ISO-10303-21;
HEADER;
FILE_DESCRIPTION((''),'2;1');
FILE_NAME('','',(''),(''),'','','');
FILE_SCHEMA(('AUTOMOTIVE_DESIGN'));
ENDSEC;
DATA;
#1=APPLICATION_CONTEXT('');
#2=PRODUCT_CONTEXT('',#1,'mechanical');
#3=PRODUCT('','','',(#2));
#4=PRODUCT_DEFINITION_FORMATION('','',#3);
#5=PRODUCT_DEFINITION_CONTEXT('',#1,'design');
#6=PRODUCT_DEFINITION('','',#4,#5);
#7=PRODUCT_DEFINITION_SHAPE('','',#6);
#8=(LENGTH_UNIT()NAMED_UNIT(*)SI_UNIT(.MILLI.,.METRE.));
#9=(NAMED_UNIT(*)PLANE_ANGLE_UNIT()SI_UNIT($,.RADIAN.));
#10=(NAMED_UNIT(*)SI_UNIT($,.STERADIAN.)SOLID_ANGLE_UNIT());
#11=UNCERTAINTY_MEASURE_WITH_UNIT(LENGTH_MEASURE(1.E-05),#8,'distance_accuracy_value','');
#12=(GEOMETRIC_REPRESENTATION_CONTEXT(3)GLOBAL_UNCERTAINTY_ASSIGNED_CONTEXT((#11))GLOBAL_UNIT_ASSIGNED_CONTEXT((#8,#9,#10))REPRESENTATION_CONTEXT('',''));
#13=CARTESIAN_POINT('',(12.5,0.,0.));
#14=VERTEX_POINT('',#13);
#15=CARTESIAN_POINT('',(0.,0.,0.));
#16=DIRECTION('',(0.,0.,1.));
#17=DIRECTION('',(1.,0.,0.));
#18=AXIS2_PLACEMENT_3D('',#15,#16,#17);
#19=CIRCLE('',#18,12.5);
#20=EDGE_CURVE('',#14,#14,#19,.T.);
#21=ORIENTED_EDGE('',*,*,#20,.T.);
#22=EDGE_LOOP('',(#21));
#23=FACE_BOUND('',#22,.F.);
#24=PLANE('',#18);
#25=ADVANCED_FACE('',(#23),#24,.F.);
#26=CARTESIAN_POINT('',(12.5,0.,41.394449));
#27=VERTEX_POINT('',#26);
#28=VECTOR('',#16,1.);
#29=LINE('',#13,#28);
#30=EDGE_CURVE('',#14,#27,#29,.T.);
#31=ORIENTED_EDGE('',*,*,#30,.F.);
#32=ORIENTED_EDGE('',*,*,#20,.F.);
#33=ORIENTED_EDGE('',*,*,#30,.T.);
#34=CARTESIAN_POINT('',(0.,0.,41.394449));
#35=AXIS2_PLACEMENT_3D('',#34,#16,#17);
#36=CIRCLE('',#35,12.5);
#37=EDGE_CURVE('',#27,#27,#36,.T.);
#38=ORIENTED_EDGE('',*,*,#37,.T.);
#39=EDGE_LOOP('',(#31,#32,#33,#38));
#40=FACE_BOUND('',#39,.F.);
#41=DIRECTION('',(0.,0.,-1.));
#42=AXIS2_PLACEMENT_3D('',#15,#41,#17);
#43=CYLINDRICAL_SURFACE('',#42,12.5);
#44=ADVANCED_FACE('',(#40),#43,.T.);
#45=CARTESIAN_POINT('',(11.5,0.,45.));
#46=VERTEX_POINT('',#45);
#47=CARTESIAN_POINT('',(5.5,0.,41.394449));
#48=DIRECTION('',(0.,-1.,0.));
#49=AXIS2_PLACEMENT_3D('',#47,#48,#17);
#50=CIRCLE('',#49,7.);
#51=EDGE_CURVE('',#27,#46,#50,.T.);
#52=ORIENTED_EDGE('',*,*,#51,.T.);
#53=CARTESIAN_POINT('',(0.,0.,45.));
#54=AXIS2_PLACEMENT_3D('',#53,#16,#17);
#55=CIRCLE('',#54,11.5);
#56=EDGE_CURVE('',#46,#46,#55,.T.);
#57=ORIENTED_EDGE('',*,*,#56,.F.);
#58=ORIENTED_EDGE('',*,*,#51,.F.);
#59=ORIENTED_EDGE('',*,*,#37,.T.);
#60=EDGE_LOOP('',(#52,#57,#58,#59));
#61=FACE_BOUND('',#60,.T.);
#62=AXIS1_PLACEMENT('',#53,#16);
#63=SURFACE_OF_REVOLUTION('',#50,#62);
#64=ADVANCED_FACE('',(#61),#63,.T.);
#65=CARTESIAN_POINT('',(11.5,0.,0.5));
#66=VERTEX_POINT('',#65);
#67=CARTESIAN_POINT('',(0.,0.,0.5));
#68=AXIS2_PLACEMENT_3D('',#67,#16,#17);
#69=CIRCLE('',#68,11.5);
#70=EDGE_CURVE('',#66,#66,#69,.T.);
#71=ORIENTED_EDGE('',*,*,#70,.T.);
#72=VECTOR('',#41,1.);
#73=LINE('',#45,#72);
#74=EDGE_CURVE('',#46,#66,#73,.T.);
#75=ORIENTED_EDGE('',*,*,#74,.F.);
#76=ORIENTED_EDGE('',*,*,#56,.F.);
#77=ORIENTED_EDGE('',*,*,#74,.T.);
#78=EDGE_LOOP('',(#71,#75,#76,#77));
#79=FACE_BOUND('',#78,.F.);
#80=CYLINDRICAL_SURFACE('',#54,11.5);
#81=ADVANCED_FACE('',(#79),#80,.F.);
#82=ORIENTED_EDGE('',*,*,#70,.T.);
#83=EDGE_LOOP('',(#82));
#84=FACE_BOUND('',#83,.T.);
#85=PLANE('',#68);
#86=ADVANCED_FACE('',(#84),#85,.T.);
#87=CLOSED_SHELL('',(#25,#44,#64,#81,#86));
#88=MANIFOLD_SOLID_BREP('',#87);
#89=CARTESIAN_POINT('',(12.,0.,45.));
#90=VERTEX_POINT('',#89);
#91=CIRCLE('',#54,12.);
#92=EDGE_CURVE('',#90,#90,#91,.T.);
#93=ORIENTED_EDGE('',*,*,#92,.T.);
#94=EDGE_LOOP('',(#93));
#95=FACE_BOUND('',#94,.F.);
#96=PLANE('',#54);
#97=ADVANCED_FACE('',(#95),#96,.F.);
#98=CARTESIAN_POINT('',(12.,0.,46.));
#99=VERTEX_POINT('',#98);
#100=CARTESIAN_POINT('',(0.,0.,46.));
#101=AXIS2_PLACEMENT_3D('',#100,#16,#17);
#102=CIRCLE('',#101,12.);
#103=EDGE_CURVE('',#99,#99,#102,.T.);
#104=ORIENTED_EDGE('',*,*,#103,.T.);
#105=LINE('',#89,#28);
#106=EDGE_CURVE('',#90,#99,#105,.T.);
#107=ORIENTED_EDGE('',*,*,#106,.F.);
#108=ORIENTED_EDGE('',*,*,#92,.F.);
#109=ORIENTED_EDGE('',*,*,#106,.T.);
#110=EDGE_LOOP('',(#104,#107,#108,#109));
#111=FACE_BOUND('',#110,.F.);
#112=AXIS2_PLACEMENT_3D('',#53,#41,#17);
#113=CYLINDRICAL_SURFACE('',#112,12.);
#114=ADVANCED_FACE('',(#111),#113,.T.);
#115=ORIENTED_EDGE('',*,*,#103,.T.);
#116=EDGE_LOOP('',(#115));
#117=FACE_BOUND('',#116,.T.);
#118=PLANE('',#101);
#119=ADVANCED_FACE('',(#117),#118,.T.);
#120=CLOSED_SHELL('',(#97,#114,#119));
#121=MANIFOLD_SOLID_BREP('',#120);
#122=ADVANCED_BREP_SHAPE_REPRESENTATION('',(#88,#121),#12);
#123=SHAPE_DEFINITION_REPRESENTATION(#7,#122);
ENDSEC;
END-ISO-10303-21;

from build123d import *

# Parameters (mm, degrees)
F0_R     = 12.5
F1_DEPTH = 45
F3_R     = 11.5
F3_R_2   = 6.5
F4_DEPTH = 44.5
F2_R     = 6.5
F6_DEPTH = 44.5
F7_R     = 12
F8_DEPTH = 1


# Not quite as in the source:
# - a fillet or chamfer that OpenCascade refuses, or shapes differently, is made with other operations: its cross-section is extruded or revolved along the edge and cut away or added


with BuildPart() as f1:
    # F0 (on Top) → F1 (new body)
    with BuildSketch(Plane.XY):
        Circle(F0_R)
    extrude(amount=F1_DEPTH)

    # F3 (on face) → F4 (cut)
    with BuildSketch(Plane.XY.offset(45)):
        Circle(F3_R)
        Circle(F3_R_2, mode=Mode.SUBTRACT)
    extrude(amount=-F4_DEPTH, mode=Mode.SUBTRACT)

    # F5: fillet of radius 7 on 1 edges, made by hand

    # F5_s1 → F5_t2 (revolve, cut)
    with BuildSketch(Plane.XZ):
        with BuildLine():
            ThreePointArc((12.5, 41.3944487245), (12.2453687816, 43.2652774179), (11.5, 45))
            Line((11.5, 45), (12.5, 45))
            Line((12.5, 45), (12.5, 41.3944487245))
        make_face()
    revolve(axis=Axis((0, 0, 45), (0, 0, 1)), mode=Mode.SUBTRACT)

    # F2 (on face) → F6 (cut)
    with BuildSketch(Plane.XY.offset(45)):
        Circle(F2_R)
    extrude(amount=-F6_DEPTH, mode=Mode.SUBTRACT)


with BuildPart() as f8:
    # F7 (on face) → F8 (new body)
    with BuildSketch(Plane.XY.offset(45)):
        Circle(F7_R)
    extrude(amount=F8_DEPTH)


solid = Compound([f1.part, f8.part])
